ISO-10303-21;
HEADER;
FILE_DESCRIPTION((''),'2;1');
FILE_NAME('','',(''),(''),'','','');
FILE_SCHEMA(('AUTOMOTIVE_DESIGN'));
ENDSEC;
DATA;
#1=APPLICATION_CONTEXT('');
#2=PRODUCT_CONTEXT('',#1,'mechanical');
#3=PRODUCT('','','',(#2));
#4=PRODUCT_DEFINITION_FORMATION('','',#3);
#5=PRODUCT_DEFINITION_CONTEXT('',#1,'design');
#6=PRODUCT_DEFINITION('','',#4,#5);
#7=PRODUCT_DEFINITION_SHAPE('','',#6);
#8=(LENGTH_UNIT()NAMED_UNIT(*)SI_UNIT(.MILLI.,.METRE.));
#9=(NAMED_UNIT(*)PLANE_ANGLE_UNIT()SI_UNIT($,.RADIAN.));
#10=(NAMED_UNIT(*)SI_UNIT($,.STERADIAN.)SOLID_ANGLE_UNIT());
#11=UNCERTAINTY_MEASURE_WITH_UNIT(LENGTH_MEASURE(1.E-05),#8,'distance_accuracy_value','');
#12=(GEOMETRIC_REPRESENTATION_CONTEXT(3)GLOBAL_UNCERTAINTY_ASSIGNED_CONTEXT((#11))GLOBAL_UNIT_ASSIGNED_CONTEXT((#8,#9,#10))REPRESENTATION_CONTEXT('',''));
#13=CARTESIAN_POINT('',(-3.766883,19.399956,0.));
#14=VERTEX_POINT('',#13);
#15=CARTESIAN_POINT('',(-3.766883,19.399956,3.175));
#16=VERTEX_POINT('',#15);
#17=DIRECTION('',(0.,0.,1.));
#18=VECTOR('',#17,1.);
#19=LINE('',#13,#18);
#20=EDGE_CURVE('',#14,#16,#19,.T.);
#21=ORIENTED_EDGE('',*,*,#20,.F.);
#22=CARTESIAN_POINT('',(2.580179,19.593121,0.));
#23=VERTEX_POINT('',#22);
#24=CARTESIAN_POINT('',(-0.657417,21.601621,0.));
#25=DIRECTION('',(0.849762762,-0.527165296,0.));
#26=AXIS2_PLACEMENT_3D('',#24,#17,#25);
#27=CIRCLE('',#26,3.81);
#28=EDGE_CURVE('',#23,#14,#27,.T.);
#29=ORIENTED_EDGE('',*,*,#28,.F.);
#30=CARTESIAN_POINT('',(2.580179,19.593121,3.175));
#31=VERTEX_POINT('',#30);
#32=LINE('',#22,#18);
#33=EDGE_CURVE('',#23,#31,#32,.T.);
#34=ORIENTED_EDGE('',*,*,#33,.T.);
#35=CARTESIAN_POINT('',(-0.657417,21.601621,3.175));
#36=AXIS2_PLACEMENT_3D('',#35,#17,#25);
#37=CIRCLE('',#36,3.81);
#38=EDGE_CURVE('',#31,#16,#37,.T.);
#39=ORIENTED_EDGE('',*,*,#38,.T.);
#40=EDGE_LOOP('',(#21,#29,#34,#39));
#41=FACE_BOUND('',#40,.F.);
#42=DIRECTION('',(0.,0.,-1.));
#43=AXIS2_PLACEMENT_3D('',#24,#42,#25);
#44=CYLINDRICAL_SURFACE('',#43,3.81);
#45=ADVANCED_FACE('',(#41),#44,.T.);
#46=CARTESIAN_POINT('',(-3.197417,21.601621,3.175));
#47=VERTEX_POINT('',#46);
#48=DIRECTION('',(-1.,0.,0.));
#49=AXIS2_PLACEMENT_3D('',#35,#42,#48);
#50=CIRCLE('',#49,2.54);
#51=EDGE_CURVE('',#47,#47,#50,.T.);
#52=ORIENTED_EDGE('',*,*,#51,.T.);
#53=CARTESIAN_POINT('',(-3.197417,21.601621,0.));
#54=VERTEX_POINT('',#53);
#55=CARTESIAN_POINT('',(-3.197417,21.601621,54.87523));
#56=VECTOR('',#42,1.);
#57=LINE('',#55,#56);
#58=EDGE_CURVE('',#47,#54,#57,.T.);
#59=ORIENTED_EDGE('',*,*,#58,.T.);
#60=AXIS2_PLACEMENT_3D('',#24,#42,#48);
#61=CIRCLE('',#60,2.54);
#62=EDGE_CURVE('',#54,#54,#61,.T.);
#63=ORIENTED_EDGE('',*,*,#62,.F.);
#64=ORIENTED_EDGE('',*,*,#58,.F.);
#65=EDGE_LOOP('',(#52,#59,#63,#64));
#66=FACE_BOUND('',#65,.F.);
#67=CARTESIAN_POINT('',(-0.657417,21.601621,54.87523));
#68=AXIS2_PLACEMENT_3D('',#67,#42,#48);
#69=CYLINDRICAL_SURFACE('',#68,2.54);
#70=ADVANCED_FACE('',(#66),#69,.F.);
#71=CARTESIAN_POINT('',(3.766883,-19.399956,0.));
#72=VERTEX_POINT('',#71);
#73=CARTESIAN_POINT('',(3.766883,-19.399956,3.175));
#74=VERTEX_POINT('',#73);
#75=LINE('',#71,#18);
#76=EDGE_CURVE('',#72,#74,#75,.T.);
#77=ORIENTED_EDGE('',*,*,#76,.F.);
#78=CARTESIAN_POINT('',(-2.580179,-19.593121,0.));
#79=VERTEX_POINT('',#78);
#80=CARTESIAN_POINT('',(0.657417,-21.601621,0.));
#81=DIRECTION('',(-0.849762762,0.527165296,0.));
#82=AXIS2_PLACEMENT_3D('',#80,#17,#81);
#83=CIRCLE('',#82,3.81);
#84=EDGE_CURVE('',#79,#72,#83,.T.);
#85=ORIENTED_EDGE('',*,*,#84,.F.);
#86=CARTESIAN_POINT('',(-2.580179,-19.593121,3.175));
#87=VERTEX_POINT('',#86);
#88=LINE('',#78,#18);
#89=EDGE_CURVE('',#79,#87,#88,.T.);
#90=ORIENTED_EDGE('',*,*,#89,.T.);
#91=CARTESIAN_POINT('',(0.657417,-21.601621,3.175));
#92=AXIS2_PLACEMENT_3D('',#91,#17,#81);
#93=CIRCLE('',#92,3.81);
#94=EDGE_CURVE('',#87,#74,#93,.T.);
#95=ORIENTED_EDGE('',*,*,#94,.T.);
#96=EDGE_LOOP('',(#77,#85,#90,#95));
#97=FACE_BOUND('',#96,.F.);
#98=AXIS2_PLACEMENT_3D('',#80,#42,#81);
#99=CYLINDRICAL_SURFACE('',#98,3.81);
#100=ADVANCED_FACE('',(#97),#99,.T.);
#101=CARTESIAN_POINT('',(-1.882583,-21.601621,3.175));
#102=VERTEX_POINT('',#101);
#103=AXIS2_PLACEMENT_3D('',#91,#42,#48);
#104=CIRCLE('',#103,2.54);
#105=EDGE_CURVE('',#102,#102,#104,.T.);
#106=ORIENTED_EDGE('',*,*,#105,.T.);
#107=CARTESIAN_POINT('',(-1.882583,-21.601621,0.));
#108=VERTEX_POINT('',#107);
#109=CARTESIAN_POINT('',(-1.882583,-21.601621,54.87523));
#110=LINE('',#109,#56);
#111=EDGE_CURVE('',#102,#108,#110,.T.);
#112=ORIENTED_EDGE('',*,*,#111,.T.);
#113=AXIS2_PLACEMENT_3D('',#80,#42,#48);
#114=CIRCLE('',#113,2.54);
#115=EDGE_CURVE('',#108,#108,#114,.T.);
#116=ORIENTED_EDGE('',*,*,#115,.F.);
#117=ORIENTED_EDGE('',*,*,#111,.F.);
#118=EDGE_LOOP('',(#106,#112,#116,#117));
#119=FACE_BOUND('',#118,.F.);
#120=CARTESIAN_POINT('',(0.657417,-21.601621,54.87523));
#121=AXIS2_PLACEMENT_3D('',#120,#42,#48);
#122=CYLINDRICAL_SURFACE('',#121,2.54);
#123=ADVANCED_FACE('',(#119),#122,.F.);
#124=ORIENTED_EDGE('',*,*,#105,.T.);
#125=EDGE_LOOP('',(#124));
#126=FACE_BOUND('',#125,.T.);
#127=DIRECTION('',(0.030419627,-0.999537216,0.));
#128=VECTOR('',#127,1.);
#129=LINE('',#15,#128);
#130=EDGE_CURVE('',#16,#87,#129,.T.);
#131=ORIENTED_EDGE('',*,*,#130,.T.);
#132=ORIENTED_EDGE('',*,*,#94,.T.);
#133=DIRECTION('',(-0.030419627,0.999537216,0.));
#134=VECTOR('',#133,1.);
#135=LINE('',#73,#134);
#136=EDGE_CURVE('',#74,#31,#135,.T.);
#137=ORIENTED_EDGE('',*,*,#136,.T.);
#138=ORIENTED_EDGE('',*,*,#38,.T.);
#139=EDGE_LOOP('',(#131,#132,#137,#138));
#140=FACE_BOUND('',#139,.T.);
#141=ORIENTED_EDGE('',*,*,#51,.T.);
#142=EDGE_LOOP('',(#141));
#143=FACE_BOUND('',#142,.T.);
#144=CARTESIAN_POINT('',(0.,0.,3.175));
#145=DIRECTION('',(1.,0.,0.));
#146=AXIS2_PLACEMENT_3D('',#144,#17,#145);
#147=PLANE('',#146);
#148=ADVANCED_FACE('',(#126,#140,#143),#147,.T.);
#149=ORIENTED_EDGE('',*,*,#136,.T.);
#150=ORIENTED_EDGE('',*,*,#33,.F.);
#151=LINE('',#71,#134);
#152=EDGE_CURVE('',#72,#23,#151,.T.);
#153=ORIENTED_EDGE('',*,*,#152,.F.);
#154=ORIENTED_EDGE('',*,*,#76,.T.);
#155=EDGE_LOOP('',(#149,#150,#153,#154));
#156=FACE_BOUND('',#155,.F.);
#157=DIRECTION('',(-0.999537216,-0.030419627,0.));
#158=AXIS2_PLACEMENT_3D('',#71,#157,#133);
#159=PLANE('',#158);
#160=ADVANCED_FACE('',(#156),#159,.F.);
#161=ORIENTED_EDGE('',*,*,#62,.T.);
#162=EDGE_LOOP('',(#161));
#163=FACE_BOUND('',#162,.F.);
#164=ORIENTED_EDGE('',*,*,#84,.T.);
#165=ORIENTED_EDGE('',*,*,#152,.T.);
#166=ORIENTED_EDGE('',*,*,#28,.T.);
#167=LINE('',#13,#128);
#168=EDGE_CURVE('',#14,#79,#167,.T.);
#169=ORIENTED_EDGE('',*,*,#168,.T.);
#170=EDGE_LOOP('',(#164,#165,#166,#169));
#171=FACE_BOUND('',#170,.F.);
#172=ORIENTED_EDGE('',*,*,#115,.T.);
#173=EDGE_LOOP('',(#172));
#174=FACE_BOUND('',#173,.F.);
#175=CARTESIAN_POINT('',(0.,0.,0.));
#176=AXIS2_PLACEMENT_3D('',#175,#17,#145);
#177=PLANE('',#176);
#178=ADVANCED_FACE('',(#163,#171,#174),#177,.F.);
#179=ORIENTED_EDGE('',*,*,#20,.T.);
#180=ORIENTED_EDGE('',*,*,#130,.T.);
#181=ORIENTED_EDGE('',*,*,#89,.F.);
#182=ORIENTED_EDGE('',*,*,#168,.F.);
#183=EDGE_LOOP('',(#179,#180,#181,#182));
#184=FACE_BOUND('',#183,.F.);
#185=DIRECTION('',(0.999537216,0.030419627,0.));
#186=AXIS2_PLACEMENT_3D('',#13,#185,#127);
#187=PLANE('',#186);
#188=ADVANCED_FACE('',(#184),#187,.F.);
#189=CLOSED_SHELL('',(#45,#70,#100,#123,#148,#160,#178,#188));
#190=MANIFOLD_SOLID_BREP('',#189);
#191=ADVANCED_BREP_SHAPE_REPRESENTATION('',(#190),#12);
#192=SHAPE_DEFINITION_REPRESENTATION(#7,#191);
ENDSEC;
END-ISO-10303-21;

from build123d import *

# Parameters (mm, degrees)
F1_DEPTH = 3.175
F3_D     = 5.08


# Not quite as in the source:
# - a feature names something its author has since deleted; it is built from what else it names


with BuildPart() as f1:
    # F0 (on Top) → F1 (new body)
    with BuildSketch(Plane.XY):
        with BuildLine():
            Line((-3.7668826879, 19.3999561499), (-2.580178634, -19.5931207831))
            ThreePointArc((-2.580178634, -19.5931207831), (0.7733162679, -25.4098573523), (3.7668826879, -19.3999561499))
            Line((3.7668826879, -19.3999561499), (2.580178634, 19.5931207831))
            ThreePointArc((2.580178634, 19.5931207831), (-0.7733162679, 25.4098573523), (-3.7668826879, 19.3999561499))
        make_face()
    extrude(amount=F1_DEPTH)

    # F3 (through all)
    with Locations(Plane.XY.offset(3.175)):
        with Locations((0.6574174881, -21.6016205591), (-0.6574174881, 21.6016205591)):
            Hole(F3_D / 2)


solid = f1.part
